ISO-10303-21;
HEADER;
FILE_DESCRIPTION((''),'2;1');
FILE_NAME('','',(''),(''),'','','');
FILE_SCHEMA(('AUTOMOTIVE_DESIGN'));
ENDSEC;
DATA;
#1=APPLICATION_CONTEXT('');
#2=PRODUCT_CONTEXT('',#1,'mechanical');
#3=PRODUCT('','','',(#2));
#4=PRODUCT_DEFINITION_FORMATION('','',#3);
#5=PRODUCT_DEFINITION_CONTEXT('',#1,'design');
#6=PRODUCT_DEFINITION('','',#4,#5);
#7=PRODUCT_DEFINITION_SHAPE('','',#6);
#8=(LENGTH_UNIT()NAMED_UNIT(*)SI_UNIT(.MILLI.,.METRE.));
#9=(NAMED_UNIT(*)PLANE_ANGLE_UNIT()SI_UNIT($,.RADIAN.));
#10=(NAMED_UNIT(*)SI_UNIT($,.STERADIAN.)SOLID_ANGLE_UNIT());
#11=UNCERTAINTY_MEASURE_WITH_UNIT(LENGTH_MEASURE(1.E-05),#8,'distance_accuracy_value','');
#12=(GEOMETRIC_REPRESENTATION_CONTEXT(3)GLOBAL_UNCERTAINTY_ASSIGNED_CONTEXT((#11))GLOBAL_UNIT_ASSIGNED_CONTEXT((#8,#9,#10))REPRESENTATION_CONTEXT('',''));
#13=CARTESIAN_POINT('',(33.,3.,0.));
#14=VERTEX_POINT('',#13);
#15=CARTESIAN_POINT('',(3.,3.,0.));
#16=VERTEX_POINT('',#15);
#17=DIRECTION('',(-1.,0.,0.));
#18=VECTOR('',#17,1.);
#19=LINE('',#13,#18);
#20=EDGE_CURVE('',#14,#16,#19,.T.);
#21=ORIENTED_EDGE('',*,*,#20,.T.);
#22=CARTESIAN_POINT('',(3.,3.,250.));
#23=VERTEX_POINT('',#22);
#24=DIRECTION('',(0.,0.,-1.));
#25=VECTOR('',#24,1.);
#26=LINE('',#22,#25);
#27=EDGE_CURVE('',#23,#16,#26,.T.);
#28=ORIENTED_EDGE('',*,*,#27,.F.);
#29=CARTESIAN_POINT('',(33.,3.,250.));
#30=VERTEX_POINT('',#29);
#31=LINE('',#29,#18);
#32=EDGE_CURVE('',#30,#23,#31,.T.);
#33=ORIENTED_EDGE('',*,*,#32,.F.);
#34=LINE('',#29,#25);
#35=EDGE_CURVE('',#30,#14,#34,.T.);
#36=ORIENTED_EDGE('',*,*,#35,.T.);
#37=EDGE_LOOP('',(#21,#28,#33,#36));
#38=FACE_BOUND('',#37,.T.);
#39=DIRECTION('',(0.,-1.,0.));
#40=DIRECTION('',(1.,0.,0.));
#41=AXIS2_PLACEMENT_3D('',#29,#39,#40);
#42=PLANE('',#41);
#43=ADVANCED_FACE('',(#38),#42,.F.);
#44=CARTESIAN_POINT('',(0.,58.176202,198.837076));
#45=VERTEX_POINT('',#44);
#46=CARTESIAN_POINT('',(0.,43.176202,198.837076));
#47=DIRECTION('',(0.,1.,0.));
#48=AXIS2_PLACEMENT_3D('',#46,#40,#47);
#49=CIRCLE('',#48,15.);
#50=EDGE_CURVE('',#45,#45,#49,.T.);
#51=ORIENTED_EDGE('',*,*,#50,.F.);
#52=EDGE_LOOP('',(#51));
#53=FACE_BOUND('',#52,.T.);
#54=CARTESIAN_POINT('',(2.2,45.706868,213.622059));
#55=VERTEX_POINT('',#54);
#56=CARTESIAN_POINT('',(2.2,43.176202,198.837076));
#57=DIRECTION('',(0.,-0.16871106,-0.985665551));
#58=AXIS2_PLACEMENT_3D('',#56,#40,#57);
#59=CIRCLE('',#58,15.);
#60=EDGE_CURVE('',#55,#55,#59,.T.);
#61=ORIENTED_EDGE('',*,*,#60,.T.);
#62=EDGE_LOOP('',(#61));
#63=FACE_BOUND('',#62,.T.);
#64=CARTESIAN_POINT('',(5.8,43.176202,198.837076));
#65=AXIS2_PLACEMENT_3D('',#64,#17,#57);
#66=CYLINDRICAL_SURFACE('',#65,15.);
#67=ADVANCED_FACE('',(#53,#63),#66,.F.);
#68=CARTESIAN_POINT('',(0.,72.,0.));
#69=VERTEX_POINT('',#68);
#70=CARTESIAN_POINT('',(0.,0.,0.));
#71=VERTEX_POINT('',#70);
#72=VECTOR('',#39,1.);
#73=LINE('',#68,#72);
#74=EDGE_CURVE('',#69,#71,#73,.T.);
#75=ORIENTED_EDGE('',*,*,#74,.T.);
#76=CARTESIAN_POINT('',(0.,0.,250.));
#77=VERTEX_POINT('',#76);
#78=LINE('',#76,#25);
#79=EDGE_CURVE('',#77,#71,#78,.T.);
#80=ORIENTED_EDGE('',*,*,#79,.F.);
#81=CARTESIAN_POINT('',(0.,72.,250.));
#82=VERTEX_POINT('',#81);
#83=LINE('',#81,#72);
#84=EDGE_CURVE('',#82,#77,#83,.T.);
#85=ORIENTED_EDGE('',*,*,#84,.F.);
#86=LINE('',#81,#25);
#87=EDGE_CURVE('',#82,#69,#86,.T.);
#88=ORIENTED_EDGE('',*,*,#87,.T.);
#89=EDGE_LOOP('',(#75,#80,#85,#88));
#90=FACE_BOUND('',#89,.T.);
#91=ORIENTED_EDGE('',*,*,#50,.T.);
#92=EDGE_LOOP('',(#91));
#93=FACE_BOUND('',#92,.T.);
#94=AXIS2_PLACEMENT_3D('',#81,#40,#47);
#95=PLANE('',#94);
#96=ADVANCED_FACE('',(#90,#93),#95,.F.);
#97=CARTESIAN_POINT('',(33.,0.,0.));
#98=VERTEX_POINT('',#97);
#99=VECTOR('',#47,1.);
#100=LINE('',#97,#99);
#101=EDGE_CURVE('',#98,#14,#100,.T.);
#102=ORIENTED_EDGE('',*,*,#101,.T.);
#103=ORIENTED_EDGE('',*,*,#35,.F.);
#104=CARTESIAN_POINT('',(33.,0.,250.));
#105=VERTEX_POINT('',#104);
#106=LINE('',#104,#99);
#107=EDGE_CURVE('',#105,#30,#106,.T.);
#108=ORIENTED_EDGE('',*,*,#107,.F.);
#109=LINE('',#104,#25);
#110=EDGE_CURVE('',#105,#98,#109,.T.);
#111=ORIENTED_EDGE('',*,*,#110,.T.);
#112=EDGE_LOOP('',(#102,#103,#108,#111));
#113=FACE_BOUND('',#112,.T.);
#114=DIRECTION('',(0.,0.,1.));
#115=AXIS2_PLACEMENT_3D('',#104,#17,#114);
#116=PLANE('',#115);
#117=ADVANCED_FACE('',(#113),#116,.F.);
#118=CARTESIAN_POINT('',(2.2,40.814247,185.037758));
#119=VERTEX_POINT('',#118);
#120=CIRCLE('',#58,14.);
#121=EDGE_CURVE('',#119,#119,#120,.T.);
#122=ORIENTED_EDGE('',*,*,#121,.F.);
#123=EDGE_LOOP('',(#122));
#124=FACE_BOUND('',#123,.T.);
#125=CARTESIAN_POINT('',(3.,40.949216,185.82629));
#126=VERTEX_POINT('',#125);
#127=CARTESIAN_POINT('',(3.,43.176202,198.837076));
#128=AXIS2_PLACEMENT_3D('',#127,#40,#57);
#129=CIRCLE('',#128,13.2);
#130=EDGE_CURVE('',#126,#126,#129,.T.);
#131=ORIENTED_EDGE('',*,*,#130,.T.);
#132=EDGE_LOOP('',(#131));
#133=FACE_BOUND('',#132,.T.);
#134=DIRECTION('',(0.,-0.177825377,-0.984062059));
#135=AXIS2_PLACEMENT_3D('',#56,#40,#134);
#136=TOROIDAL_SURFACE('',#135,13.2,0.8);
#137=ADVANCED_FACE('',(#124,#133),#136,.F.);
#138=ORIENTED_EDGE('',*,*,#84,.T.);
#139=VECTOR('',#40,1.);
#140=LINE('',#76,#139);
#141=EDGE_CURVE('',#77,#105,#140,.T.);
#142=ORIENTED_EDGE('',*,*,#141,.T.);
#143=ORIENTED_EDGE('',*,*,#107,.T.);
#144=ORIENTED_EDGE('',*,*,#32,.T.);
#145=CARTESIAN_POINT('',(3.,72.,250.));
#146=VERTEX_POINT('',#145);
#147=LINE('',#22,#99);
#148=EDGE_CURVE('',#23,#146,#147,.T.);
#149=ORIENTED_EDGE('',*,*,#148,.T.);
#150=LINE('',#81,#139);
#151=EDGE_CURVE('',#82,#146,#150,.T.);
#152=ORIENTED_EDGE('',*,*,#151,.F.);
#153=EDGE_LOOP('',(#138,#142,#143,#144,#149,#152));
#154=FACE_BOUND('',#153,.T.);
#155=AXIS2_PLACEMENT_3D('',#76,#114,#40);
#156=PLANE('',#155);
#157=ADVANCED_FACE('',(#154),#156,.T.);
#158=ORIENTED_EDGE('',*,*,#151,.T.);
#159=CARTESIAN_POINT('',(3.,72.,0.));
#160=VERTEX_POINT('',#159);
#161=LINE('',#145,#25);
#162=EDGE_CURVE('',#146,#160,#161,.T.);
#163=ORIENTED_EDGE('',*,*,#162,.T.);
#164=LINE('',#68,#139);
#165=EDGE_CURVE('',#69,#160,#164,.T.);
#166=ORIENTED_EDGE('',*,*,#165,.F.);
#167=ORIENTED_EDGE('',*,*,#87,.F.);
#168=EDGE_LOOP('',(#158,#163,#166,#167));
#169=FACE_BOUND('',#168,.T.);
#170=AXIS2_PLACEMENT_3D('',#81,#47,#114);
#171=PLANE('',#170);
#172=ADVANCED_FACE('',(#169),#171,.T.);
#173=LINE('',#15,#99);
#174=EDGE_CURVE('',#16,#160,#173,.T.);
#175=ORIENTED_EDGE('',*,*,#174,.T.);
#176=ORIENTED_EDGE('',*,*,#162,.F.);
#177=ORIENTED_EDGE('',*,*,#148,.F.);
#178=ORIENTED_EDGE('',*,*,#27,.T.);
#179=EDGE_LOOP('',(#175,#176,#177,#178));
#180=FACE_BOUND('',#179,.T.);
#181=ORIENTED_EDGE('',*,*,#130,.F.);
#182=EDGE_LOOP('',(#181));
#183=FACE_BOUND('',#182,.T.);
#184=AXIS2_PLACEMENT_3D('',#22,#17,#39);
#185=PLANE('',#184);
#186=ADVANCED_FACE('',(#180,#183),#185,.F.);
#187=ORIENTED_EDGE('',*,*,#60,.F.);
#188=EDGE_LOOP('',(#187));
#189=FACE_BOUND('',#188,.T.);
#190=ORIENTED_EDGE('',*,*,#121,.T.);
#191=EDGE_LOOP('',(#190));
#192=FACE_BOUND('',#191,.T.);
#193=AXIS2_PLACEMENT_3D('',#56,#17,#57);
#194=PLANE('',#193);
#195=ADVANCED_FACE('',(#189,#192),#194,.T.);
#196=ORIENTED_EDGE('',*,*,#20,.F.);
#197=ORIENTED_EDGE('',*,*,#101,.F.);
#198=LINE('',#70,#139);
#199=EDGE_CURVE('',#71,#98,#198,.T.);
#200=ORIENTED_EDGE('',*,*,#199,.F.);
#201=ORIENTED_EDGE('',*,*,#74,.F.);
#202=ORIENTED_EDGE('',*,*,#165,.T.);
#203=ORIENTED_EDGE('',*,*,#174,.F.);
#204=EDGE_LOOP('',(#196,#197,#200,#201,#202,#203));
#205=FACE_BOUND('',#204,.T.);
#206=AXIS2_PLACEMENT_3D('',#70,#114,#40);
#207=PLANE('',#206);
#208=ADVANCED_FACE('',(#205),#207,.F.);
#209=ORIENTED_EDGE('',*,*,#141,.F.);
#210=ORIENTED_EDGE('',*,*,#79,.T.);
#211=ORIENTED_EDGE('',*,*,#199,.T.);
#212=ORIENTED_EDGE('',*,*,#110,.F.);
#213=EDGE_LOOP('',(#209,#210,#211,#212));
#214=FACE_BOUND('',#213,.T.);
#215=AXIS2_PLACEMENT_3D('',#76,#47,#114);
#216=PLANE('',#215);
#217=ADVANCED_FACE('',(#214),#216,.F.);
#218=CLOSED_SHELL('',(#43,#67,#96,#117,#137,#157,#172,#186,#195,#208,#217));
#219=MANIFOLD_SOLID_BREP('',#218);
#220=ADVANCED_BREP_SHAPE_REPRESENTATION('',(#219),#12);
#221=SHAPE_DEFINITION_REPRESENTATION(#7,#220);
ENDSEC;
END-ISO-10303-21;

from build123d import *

# Parameters (mm, degrees)
BOSS_EXTRUDE1_DEPTH = 250


# Read off the part's stored shape, not the designer's step: Cavity1
with BuildPart() as part:
    # Sketch1 → Boss-Extrude1 (new body)
    with BuildSketch(Plane.XY):
        Polygon((0, 72), (3, 72), (3, 3), (33, 3), (33, 0), (0, 0), align=None)
    extrude(amount=BOSS_EXTRUDE1_DEPTH)

    # Cavity1 outline → Cavity1 (revolve, cut)
    with BuildSketch(Plane(origin=(0, 43.176202168, 198.837075549), x_dir=(0, 1, 0), z_dir=(0, 0, -1))):
        with BuildLine():
            Line((15, 0), (15, 2.2))
            Line((15, 2.2), (14, 2.2))
            ThreePointArc((14, 2.2), (13.765685425, 2.765685425), (13.2, 3))
            Line((13.2, 3), (0, 3))
            Line((0, 3), (0, 0))
            Line((0, 0), (15, 0))
        make_face()
    revolve(axis=Axis((0, 43.176202168, 198.837075549), (1, 0, 0)), mode=Mode.SUBTRACT)


solid = part.part
